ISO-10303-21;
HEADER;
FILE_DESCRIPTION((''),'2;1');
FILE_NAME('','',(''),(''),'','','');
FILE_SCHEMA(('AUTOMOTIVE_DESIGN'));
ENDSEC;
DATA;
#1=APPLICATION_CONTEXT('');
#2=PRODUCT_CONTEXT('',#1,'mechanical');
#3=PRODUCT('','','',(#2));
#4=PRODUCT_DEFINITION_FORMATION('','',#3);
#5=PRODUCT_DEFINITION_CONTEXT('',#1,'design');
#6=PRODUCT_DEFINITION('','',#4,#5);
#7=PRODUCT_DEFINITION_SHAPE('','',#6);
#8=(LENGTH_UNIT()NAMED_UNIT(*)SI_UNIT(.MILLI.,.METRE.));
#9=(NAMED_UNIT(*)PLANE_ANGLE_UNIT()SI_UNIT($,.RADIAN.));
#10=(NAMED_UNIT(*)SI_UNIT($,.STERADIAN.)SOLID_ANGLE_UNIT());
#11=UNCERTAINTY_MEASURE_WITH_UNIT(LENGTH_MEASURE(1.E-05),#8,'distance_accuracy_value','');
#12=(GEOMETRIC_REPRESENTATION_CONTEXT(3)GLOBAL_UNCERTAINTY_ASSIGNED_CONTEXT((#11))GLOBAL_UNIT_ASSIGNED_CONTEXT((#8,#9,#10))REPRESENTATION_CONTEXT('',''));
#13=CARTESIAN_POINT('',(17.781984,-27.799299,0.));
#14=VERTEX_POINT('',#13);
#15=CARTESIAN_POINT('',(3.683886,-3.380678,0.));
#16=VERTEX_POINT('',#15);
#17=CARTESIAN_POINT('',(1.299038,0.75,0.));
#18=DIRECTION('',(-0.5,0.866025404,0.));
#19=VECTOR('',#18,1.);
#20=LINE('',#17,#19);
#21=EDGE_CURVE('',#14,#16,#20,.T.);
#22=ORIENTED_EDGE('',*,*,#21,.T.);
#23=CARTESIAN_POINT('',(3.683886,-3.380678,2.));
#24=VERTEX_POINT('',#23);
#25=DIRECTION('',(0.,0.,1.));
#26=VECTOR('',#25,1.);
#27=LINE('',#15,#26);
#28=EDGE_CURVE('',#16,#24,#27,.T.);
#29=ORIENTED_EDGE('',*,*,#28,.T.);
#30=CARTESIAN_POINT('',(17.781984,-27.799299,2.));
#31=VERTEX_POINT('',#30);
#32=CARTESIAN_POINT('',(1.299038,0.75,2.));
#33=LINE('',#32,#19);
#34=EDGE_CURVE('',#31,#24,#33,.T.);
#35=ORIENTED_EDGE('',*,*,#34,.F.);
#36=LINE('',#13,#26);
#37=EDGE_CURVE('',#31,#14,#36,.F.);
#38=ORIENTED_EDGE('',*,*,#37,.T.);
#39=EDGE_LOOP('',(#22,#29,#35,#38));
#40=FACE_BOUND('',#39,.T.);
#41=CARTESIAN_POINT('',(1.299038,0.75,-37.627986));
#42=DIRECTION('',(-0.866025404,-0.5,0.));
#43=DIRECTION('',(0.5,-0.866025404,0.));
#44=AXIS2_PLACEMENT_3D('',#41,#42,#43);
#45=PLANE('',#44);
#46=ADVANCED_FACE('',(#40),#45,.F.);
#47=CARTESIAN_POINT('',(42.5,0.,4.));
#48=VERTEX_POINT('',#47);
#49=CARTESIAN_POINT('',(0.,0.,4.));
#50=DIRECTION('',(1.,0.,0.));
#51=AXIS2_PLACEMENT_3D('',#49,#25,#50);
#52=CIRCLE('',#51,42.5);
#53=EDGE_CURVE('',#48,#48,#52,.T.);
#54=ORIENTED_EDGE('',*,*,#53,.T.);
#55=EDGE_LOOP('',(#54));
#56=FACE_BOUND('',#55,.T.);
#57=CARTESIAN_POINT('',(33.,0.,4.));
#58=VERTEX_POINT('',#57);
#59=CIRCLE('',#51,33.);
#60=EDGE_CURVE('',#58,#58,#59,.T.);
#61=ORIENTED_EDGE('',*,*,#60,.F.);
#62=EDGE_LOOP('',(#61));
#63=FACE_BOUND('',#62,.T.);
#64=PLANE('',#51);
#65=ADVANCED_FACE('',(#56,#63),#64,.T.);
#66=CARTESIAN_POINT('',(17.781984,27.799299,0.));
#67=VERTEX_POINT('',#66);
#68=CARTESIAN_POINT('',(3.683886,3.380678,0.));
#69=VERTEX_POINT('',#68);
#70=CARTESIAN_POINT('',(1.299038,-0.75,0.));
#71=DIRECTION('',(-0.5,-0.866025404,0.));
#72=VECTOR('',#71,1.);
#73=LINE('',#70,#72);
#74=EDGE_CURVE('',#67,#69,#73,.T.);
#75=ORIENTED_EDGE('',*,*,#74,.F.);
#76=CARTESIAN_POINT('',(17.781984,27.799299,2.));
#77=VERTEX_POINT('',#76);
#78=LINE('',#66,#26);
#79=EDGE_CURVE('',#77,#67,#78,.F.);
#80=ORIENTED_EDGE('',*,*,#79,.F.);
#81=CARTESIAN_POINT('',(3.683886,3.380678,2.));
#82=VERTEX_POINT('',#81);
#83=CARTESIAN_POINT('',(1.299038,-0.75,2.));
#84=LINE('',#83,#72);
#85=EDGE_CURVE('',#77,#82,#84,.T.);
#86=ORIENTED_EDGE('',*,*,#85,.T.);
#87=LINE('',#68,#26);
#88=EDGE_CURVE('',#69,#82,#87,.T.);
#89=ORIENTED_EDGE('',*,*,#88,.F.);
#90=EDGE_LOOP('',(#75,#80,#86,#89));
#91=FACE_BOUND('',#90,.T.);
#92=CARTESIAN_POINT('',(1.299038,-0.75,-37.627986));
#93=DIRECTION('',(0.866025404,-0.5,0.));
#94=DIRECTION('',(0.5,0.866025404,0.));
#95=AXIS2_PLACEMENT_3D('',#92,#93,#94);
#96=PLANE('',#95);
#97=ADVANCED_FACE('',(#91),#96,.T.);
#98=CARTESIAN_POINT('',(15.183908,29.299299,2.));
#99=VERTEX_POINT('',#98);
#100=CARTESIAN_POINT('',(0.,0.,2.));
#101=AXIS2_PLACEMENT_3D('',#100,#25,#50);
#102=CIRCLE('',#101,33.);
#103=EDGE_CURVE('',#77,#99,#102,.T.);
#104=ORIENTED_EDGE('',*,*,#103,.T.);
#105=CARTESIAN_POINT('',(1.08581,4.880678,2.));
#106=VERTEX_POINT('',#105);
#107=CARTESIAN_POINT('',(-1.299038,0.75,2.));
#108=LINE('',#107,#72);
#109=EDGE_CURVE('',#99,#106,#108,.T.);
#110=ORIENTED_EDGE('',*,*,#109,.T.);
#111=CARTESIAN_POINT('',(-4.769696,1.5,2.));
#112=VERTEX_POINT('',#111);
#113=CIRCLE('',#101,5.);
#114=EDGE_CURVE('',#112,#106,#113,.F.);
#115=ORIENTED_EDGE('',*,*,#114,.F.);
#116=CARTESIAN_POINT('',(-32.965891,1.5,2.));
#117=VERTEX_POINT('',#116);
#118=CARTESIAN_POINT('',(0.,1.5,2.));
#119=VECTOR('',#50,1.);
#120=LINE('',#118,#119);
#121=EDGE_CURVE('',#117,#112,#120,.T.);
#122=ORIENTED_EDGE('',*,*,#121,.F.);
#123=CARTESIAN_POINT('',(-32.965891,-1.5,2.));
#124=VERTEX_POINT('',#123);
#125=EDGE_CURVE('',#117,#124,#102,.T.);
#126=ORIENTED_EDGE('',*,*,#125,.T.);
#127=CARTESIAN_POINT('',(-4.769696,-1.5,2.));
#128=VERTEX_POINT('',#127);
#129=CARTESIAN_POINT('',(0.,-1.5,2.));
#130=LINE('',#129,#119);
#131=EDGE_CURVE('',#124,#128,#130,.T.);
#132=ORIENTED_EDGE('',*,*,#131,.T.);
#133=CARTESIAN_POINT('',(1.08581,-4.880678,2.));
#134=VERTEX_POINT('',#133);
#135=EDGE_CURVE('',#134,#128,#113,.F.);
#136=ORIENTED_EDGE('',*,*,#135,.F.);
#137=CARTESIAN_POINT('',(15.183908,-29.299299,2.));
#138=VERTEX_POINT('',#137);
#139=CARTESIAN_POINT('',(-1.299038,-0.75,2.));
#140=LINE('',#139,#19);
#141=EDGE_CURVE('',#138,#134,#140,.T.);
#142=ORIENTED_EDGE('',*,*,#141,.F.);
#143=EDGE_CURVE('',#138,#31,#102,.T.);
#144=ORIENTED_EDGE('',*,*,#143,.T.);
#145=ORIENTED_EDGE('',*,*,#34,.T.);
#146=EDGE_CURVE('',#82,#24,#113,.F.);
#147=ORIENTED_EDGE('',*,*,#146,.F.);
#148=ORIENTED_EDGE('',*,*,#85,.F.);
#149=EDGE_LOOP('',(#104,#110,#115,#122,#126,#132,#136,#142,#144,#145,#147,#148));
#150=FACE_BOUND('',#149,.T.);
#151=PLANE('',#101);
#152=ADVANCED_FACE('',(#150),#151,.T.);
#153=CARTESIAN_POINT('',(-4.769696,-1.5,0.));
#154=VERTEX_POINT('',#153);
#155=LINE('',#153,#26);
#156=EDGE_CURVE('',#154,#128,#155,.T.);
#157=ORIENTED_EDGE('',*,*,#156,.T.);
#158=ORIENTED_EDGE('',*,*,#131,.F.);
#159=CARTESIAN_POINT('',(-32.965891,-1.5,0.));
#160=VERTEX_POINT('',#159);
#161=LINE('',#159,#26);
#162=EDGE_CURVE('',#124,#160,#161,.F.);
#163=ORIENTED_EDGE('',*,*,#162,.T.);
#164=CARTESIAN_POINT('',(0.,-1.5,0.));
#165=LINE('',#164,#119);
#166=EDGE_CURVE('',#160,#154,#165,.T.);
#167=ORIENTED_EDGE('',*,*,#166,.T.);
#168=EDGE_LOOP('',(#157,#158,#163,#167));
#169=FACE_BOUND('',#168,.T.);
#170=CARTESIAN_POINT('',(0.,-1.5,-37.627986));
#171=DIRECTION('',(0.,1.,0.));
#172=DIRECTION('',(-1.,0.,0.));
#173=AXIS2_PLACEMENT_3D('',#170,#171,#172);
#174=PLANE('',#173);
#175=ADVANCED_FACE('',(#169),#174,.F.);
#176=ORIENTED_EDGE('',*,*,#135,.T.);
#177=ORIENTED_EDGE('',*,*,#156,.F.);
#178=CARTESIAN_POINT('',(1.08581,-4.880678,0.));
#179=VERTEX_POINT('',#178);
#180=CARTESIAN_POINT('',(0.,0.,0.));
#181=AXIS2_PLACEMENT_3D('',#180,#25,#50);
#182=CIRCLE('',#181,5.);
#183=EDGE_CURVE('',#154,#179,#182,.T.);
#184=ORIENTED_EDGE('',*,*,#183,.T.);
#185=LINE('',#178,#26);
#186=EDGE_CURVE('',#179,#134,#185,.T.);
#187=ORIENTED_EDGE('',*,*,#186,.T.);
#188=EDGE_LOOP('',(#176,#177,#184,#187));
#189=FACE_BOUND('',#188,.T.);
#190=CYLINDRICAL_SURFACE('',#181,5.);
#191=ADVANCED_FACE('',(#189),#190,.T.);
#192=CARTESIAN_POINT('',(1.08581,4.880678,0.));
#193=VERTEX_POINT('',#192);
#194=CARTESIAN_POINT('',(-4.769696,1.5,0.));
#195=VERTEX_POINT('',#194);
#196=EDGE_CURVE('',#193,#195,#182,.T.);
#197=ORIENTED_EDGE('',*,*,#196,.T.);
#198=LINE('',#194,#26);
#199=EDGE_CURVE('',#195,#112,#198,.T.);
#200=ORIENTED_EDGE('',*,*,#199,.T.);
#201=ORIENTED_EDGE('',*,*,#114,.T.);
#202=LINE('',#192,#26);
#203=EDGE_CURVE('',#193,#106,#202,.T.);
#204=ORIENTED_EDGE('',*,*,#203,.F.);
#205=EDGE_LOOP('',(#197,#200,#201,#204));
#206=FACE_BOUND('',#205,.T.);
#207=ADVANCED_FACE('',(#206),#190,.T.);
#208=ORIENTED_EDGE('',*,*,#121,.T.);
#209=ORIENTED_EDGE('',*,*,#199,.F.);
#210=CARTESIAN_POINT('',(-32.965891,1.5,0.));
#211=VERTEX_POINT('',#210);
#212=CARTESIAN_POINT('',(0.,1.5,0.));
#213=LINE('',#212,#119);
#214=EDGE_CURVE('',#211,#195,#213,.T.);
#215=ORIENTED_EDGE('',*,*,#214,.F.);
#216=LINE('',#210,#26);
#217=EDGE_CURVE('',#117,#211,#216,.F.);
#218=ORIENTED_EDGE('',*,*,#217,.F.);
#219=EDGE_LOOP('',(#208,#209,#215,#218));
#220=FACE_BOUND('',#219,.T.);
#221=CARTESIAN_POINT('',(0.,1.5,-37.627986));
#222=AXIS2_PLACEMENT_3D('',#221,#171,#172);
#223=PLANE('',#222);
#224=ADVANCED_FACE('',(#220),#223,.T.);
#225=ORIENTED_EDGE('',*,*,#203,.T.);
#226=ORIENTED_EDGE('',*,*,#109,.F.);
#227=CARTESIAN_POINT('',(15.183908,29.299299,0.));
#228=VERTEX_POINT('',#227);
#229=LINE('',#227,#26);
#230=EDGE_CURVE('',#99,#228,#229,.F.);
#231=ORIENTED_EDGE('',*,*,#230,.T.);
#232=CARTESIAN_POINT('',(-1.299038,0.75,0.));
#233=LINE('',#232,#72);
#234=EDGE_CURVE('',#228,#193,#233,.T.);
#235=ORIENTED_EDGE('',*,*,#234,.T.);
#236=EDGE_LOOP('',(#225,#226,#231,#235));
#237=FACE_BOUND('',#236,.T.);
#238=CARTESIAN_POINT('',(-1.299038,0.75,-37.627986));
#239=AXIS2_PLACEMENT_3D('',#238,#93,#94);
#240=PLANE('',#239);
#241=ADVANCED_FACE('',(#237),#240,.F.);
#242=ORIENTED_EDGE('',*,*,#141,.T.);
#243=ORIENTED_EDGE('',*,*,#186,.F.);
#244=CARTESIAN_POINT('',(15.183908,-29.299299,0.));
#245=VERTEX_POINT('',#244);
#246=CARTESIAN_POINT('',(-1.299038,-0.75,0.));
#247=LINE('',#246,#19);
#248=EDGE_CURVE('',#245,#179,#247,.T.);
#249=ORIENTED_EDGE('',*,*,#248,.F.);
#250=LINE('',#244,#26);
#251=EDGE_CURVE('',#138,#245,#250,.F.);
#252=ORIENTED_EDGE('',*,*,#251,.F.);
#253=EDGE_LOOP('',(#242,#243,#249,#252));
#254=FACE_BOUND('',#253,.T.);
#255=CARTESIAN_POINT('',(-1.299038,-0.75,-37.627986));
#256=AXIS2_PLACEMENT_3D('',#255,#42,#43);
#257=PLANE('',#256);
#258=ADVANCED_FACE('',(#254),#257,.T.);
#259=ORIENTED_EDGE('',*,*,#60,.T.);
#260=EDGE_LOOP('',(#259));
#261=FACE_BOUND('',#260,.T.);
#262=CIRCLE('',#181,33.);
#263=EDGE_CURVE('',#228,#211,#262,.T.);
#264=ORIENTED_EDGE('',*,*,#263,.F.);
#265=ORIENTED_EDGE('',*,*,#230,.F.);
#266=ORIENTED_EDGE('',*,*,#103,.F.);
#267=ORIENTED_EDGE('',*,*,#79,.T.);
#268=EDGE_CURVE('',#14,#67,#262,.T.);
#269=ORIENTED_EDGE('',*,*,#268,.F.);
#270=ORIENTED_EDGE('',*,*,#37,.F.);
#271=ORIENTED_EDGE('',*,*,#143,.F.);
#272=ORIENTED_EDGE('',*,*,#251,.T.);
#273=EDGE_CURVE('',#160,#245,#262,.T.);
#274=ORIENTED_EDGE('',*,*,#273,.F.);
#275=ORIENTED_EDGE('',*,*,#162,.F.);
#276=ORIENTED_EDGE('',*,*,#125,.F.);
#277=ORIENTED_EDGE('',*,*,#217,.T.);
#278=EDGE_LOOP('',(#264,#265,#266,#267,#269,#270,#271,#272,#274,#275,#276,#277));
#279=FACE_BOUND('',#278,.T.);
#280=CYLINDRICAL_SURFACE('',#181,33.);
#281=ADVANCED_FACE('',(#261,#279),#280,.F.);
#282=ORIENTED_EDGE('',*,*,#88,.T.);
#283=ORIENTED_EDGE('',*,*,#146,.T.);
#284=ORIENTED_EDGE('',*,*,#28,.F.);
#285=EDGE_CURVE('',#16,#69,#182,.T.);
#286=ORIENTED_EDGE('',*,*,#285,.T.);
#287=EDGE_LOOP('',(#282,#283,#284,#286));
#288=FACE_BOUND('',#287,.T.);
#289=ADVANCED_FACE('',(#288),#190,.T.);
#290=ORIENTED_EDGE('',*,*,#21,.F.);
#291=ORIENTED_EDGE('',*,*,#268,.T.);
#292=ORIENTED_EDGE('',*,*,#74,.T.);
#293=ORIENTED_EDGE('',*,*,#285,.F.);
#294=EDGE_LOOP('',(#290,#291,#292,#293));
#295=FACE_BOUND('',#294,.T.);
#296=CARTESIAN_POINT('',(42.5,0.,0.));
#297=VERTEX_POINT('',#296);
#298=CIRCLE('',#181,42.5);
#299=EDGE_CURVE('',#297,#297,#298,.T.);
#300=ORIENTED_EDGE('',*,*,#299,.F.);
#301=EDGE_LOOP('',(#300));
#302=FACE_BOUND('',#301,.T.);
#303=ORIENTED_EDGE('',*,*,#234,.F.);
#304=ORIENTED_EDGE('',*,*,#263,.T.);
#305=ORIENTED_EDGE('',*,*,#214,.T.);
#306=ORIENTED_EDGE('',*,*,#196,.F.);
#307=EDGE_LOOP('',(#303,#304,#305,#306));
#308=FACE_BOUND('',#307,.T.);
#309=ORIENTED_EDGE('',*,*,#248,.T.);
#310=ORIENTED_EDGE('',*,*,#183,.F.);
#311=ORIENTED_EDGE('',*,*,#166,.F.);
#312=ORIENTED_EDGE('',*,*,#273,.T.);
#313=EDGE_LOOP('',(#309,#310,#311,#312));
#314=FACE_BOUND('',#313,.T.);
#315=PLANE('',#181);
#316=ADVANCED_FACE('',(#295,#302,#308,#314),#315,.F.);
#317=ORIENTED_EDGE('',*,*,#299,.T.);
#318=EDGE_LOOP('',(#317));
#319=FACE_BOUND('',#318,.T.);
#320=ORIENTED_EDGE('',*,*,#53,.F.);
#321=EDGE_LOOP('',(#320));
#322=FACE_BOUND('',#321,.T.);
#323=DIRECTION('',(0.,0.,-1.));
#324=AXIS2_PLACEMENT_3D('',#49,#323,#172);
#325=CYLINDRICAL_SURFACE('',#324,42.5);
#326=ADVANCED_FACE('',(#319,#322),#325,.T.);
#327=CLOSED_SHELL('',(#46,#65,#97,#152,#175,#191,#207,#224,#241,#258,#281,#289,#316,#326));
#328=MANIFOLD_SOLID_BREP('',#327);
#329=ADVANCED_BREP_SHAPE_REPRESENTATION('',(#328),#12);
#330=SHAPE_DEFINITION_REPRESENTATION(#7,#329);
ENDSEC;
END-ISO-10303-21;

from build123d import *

# Parameters (mm, degrees)
SKETCH1_R           = 42.5
BOSS_EXTRUDE1_DEPTH = 4
SKETCH3_R           = 33
SKETCH3_R_2         = 5
CUT_EXTRUDE2_DEPTH  = 61.237031799
SKETCH4_W           = 35
SKETCH4_H           = 3
BOSS_EXTRUDE3_DEPTH = 4
SKETCH5_R           = 33
CUT_EXTRUDE4_DEPTH  = 2


# Read off the part's stored shape, not the designer's step: Cavity1
with BuildPart() as part:
    # Sketch1 → Boss-Extrude1 (new body)
    with BuildSketch(Plane.XY):
        Circle(SKETCH1_R)
    extrude(amount=BOSS_EXTRUDE1_DEPTH)

    # Cavity1 outline → Cavity1 (revolve, cut)
    with BuildSketch(Plane.XZ):
        Polygon((0.75, 0), (0.75, 3.9), (0.65, 4), (0, 4), (0, 0), align=None)
    revolve(axis=Axis((0, 0, 0), (0, 0, 1)), mode=Mode.SUBTRACT)

    # Sketch3 → Cut-Extrude2 (cut, through all)
    with BuildSketch(Plane.XY.offset(4)):
        Circle(SKETCH3_R)
        Circle(SKETCH3_R_2, mode=Mode.SUBTRACT)
    extrude(amount=-CUT_EXTRUDE2_DEPTH, mode=Mode.SUBTRACT)


with BuildPart() as cut_extrude2_piece_1:
    # of the separate pieces the step leaves, piece 1, a body of its own (cut_extrude2_pieces)
    add(part.part.solids().sort_by_distance((42.5, 0, 0))[0])



with BuildPart() as cut_extrude2_piece_2:
    # of the separate pieces the step leaves, piece 2, a body of its own (cut_extrude2_pieces)
    add(part.part.solids().sort_by_distance((5, 0, 0))[0])


with BuildPart() as cut_extrude2_piece_1_1:
    add(cut_extrude2_piece_1.part)

    add(cut_extrude2_piece_2.part)  # Boss-Extrude3 merges Cut-Extrude2 piece 2
    # Sketch4 → Boss-Extrude3 (add)
    with BuildSketch(Plane.XY.offset(4)):
        with Locations((-17.5, 0)):
            Rectangle(SKETCH4_W, SKETCH4_H)
        Polygon((-1.299038106, 0.75), (16.200961894, 31.060889132), (18.799038106, 29.560889132), (1.299038106, -0.75), align=None)
        Polygon((1.299038106, 0.75), (18.799038106, -29.560889132), (16.200961894, -31.060889132), (-1.299038106, -0.75), align=None)
    extrude(amount=-BOSS_EXTRUDE3_DEPTH)

    # Sketch5 → Cut-Extrude4 (cut)
    with BuildSketch(Plane.XY.offset(4)):
        Circle(SKETCH5_R)
    extrude(amount=-CUT_EXTRUDE4_DEPTH, mode=Mode.SUBTRACT)


solid = cut_extrude2_piece_1_1.part
